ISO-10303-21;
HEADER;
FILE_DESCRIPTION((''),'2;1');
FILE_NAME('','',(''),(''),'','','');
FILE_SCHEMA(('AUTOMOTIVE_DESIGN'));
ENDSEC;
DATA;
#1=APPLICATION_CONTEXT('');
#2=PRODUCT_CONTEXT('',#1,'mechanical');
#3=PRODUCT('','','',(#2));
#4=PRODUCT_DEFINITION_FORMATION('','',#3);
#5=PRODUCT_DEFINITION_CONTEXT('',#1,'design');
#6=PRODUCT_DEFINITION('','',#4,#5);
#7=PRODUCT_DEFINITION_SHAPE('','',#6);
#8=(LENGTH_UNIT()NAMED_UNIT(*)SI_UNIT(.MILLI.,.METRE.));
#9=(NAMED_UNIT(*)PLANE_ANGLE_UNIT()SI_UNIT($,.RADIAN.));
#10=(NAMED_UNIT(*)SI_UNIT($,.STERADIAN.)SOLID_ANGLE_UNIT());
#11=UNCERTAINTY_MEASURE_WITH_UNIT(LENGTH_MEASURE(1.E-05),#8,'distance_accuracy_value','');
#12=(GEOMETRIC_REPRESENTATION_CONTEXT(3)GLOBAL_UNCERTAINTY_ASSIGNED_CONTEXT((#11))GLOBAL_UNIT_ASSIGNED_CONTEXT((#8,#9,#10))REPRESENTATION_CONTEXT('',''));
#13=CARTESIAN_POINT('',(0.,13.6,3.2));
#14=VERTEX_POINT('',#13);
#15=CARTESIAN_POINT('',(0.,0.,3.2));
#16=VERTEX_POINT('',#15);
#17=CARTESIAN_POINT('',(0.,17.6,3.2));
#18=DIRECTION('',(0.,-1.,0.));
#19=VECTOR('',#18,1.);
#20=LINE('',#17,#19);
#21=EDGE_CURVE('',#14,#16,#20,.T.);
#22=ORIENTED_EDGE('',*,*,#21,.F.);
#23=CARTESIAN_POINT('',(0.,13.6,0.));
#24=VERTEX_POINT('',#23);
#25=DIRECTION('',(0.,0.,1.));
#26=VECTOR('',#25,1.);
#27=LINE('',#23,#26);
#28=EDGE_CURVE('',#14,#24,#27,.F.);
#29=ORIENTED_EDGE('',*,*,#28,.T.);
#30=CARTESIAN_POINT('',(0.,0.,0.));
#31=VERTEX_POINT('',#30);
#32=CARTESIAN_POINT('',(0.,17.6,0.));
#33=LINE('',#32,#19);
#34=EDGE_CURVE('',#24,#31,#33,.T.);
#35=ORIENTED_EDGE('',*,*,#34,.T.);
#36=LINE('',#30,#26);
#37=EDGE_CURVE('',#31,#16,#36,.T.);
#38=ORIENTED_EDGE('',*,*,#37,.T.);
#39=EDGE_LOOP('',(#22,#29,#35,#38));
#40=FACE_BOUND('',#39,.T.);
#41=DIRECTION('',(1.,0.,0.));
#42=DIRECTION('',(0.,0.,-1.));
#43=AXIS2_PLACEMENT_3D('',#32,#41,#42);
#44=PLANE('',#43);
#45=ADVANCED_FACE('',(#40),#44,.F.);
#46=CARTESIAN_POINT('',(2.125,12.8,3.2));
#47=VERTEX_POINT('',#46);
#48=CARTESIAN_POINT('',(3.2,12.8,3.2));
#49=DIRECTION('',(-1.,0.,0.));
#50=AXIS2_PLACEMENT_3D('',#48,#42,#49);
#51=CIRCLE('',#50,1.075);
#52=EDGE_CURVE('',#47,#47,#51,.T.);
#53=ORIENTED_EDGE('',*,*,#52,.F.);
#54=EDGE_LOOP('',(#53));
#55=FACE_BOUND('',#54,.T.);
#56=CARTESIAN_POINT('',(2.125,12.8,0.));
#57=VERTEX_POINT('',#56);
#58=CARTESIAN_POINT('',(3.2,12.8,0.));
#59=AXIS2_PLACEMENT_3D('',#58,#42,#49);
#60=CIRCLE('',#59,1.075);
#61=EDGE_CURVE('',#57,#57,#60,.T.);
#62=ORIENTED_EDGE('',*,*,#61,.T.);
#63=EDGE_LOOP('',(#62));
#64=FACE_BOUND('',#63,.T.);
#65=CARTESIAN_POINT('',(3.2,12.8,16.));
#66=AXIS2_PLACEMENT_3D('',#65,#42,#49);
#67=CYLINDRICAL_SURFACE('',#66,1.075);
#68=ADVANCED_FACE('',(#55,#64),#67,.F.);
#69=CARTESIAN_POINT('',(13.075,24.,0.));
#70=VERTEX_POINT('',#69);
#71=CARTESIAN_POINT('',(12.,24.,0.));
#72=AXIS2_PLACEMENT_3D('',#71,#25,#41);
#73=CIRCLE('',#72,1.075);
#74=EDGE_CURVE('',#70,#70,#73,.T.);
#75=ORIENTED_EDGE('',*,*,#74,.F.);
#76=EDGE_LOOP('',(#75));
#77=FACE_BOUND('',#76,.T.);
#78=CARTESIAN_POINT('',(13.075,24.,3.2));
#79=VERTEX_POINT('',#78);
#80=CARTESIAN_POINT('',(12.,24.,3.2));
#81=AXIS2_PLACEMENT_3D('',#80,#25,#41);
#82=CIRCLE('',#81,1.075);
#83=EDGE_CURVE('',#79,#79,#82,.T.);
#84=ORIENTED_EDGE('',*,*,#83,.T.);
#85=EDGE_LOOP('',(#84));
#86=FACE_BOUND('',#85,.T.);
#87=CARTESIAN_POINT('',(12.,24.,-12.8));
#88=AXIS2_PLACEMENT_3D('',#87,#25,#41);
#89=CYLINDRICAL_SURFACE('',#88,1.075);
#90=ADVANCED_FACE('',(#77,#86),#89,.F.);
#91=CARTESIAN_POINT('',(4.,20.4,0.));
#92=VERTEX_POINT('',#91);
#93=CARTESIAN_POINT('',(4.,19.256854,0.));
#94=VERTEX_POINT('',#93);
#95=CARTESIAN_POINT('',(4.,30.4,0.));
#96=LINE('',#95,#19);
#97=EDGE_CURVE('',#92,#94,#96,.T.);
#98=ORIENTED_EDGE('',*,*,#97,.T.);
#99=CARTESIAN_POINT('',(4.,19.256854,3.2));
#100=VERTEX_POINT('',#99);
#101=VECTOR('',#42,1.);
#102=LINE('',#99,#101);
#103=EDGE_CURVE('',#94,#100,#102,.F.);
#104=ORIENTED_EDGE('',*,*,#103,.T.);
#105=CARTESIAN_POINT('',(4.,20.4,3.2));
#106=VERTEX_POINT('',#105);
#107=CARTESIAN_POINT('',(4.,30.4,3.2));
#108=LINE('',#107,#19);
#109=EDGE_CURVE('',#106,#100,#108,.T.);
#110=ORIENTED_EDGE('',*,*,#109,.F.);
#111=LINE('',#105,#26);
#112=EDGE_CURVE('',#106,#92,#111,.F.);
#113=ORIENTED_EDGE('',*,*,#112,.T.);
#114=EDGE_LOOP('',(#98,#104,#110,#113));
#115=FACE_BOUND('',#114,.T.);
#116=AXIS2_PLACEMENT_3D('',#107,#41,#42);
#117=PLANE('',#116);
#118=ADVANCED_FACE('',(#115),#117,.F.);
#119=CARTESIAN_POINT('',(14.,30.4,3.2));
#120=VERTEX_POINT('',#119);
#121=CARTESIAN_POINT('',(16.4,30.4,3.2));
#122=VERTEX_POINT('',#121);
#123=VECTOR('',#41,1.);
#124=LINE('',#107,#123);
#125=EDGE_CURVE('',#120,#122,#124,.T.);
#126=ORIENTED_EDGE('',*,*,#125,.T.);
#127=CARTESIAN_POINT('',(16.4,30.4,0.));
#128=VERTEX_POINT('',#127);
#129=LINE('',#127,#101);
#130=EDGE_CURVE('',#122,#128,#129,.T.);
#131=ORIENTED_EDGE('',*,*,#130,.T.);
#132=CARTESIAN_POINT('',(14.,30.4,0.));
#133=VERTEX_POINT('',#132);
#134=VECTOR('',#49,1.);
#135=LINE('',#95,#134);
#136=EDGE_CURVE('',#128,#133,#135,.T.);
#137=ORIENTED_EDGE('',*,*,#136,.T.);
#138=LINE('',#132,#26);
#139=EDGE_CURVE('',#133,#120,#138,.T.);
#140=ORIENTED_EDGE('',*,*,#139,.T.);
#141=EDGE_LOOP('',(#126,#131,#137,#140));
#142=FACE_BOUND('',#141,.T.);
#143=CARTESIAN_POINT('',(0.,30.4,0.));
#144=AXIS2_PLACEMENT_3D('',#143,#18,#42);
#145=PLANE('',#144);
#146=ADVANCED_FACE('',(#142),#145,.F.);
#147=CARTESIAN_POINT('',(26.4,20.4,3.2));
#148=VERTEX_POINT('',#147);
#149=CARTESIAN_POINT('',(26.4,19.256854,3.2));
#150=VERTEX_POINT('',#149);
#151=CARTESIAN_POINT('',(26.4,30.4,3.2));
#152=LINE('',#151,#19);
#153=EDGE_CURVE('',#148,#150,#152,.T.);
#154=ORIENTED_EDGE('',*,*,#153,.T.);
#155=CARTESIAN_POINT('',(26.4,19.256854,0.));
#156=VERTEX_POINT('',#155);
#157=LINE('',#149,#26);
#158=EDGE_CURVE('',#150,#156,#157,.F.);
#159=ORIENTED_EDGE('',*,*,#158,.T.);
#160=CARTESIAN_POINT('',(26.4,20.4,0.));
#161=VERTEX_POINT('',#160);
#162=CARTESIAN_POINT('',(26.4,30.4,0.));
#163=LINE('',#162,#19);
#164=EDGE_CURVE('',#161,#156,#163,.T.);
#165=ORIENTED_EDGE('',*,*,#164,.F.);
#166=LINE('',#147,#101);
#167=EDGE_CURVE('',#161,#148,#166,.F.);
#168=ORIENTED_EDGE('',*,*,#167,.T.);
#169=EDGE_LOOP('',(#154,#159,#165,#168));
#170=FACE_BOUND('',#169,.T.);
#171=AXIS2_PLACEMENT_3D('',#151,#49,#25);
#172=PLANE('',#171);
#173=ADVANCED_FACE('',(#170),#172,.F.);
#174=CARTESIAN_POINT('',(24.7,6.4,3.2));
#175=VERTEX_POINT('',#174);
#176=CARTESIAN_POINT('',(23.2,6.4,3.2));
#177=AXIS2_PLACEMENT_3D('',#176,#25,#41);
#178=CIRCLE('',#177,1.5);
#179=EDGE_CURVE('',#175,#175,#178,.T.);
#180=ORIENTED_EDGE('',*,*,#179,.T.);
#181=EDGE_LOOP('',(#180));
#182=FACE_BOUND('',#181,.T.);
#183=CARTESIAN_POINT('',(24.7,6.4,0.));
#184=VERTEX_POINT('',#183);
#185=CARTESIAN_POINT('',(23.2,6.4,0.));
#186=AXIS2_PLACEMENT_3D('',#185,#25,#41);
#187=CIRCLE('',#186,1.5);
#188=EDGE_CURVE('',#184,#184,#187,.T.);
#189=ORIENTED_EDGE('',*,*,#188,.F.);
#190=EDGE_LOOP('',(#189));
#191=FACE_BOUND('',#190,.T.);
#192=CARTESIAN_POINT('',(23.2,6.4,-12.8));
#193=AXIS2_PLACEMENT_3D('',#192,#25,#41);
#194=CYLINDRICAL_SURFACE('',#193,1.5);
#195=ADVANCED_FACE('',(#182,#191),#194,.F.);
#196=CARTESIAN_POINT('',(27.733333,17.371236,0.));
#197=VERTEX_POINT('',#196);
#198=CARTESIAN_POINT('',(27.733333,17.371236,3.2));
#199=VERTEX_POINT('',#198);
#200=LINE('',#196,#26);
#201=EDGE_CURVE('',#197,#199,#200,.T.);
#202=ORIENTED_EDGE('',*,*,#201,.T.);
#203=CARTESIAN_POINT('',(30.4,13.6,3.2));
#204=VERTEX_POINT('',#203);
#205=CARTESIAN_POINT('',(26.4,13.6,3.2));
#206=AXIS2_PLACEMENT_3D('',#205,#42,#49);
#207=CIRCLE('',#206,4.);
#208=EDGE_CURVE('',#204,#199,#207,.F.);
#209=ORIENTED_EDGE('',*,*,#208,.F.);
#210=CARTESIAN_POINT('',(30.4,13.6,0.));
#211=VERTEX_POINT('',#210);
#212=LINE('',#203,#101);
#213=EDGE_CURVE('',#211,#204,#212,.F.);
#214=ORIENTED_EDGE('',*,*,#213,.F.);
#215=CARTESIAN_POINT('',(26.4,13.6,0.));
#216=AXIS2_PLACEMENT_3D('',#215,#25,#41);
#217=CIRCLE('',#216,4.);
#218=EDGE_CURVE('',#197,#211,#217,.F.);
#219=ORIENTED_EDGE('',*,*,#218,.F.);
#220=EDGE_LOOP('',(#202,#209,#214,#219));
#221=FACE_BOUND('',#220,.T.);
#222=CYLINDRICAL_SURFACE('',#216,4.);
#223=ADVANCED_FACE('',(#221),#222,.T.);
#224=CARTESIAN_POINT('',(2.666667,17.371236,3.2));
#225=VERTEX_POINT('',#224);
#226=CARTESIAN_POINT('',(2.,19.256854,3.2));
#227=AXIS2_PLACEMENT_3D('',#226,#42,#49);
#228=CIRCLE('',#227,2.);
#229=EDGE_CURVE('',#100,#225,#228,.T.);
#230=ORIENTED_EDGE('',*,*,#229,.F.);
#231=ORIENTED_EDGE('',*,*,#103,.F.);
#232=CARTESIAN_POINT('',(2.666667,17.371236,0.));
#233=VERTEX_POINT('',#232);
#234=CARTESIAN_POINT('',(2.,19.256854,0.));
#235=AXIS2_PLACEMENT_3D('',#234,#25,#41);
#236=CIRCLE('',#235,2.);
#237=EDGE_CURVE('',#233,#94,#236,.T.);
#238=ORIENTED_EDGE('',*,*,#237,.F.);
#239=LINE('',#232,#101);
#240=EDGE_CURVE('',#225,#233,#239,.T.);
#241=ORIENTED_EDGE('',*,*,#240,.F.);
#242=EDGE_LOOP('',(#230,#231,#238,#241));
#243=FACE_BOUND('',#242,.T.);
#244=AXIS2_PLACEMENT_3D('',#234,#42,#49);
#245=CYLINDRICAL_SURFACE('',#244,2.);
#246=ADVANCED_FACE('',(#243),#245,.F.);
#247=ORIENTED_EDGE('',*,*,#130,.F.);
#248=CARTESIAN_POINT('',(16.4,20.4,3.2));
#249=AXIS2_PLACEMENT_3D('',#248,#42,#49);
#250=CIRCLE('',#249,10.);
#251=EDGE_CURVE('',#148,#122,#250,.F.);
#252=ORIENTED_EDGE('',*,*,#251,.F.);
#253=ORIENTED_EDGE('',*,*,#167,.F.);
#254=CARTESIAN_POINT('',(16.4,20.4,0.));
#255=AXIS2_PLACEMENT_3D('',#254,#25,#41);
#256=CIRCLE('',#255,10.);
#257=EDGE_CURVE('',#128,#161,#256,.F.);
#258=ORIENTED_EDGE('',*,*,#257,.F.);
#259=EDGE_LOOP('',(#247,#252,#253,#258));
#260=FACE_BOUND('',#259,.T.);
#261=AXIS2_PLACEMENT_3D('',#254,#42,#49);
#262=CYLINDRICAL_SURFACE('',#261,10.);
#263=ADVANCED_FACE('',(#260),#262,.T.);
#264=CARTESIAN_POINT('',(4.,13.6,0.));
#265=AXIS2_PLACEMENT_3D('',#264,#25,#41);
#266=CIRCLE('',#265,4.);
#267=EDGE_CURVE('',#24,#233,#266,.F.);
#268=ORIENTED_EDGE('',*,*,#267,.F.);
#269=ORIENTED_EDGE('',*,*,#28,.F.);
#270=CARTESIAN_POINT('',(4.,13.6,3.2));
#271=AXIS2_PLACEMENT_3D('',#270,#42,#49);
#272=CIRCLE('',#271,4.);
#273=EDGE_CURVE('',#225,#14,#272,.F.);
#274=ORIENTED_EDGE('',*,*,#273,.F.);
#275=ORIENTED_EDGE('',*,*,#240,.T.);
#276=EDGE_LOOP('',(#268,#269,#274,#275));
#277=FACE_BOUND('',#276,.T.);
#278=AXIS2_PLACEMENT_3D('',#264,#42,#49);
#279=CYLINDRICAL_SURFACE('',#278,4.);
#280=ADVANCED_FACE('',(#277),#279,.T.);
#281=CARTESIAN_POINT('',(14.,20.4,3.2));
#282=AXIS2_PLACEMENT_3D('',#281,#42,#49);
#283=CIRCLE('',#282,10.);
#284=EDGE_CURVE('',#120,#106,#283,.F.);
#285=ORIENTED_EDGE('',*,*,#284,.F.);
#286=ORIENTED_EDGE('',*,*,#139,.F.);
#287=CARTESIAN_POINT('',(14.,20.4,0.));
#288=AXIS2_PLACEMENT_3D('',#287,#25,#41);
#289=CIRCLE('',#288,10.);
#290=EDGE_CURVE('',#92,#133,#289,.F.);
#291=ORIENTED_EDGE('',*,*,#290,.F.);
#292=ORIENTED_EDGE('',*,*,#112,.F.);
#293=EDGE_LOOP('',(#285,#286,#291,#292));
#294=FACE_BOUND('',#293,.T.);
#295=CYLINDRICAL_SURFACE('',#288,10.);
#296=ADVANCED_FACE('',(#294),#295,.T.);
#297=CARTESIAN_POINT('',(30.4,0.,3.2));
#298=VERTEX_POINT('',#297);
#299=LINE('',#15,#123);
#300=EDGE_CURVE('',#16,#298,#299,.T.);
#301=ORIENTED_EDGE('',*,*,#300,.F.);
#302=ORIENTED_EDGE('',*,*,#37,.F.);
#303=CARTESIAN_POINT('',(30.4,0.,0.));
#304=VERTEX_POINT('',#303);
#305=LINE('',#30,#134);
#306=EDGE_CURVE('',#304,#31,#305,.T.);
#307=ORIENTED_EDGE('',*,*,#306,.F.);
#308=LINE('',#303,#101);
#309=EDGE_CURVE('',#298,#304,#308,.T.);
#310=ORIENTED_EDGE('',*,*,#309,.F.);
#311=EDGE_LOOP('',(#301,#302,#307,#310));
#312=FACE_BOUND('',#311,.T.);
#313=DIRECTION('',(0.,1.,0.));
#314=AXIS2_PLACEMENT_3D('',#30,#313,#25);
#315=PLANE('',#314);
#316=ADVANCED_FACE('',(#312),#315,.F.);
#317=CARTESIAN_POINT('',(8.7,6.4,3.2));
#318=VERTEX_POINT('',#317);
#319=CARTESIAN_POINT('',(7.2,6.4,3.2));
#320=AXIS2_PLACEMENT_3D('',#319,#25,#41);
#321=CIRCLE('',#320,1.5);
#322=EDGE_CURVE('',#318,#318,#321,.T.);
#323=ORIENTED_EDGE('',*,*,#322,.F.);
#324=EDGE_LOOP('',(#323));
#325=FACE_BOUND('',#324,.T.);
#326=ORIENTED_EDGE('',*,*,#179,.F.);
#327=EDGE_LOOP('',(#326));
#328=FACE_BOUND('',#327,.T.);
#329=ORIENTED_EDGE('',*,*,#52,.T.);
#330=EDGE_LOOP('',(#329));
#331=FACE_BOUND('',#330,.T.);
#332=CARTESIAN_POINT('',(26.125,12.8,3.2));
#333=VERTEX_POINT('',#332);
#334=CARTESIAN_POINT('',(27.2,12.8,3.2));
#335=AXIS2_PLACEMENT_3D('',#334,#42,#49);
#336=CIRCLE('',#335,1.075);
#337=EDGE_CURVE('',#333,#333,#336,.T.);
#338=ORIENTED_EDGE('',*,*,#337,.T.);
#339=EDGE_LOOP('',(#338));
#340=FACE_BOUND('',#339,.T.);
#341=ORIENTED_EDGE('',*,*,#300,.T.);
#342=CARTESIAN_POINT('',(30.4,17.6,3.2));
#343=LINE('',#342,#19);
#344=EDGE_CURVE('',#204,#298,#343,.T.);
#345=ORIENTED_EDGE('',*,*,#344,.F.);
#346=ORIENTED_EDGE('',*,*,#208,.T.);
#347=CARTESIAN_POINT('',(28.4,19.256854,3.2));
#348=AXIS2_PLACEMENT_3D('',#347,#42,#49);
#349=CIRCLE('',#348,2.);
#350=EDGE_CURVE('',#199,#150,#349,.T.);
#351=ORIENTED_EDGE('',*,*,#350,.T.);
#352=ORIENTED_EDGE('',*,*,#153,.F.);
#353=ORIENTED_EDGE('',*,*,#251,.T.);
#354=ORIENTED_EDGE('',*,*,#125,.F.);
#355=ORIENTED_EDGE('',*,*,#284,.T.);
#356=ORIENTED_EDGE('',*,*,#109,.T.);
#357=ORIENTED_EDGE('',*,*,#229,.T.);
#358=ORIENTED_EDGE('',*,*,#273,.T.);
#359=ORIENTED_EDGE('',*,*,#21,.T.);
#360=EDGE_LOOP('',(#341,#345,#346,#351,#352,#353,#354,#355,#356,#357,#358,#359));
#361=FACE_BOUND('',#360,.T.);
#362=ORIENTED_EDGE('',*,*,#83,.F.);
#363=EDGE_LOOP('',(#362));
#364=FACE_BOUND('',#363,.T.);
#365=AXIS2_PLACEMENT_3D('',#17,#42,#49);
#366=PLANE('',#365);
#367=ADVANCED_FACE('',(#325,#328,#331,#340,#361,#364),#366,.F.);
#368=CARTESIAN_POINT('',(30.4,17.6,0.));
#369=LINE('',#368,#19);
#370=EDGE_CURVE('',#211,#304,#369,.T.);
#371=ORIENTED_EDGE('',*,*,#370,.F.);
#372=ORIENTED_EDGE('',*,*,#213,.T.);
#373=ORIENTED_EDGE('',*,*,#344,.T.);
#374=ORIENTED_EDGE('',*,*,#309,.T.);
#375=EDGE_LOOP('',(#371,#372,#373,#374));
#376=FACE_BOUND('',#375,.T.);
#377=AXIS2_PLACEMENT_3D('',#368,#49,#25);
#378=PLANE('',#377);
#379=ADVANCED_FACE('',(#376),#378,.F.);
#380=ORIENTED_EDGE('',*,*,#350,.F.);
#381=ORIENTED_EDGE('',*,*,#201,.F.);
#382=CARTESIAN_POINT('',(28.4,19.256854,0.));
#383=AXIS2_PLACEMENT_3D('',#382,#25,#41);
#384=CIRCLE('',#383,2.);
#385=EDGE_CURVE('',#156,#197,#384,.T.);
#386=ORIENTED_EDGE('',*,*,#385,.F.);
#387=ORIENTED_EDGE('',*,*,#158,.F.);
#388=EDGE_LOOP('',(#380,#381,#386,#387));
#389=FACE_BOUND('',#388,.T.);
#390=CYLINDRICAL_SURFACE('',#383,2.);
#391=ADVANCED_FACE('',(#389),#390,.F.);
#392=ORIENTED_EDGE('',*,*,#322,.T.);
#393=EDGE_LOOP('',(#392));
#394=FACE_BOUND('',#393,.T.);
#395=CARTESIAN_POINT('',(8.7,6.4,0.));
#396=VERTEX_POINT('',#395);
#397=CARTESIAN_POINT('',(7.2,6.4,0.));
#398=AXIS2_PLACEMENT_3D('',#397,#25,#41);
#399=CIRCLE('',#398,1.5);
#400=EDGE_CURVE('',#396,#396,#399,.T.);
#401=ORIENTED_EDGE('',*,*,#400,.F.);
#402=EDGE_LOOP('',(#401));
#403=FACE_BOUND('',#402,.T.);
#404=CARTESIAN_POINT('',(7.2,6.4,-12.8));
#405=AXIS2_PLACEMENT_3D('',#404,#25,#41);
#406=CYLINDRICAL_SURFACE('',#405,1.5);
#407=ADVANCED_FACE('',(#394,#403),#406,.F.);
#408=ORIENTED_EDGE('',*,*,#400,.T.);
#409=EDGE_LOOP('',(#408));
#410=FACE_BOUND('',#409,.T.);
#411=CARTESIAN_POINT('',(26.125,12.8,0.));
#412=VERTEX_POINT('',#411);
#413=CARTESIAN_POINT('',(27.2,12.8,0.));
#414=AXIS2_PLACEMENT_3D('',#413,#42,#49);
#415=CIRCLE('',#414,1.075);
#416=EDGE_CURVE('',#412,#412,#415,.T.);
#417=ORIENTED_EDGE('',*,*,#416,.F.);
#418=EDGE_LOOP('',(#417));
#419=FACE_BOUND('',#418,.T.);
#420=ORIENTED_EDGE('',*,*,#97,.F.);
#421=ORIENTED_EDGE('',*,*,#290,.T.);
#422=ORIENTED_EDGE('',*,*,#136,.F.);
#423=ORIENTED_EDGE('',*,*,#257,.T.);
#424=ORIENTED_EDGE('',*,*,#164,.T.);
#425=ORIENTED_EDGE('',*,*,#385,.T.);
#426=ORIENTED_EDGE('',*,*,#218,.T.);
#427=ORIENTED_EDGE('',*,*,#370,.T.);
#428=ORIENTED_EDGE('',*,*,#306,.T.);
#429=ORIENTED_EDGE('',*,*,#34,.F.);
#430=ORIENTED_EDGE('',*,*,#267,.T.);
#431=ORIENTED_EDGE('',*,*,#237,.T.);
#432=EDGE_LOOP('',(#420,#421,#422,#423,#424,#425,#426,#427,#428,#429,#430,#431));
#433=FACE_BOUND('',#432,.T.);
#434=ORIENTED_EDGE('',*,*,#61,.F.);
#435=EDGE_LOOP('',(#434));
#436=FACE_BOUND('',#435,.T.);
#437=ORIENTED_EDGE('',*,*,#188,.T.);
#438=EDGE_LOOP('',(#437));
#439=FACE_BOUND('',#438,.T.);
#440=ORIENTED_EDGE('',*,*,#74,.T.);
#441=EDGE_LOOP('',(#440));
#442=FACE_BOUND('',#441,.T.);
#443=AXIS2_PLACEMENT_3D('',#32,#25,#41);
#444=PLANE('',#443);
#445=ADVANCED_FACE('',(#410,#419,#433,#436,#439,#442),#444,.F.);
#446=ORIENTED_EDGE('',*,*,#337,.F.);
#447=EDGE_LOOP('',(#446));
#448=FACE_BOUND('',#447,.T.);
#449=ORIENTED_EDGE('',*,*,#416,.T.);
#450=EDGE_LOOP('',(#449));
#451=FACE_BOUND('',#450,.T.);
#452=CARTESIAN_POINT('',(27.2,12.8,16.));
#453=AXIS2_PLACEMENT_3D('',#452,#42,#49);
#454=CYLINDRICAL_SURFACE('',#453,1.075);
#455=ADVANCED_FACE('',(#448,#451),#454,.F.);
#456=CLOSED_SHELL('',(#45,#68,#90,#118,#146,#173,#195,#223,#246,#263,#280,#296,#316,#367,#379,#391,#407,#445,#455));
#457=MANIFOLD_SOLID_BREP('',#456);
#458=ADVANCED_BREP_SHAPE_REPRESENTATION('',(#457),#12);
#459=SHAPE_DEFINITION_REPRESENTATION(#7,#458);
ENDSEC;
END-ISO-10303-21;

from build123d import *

# Parameters (mm, degrees)
SKETCH1_W           = 30.4
SKETCH1_H           = 3.2
BOSS_EXTRUDE1_DEPTH = 17.6
SKETCH2_R           = 1.5
CUT_EXTRUDE1_DEPTH  = 16
SKETCH3_R           = 1.075
CUT_EXTRUDE2_DEPTH  = 16
SKETCH4_W           = 22.4
SKETCH4_H           = 3.2
BOSS_EXTRUDE2_DEPTH = 12.8
SKETCH5_R           = 1.075
CUT_EXTRUDE3_DEPTH  = 16
FILLET1_R           = 10
FILLET2_R           = 4
FILLET3_R           = 2


with BuildPart() as part:
    # Sketch1 → Boss-Extrude1 (new body)
    with BuildSketch(Plane(origin=(0, 0, 0), x_dir=(1, 0, 0), z_dir=(0, 1, 0))):
        with Locations((15.2, -1.6)):
            Rectangle(SKETCH1_W, SKETCH1_H)
    extrude(amount=BOSS_EXTRUDE1_DEPTH)

    # Sketch2 → Cut-Extrude1 (cut)
    with BuildSketch(Plane.XY.offset(3.2)):
        with Locations((23.2, 6.4)):
            Circle(SKETCH2_R)
        with Locations((7.2, 6.4)):
            Circle(SKETCH2_R)
    extrude(amount=-CUT_EXTRUDE1_DEPTH, mode=Mode.SUBTRACT)

    # Sketch3 → Cut-Extrude2 (cut)
    with BuildSketch(Plane(origin=(0, 0, 0), x_dir=(-1, 0, 0), z_dir=(0, 0, -1))):
        with Locations((-27.2, 12.8)):
            Circle(SKETCH3_R)
        with Locations((-3.2, 12.8)):
            Circle(SKETCH3_R)
    extrude(amount=-CUT_EXTRUDE2_DEPTH, mode=Mode.SUBTRACT)

    # Sketch4 → Boss-Extrude2 (add)
    with BuildSketch(Plane(origin=(0, 17.6, 0), x_dir=(1, 0, 0), z_dir=(0, 1, 0))):
        with Locations((15.2, -1.6)):
            Rectangle(SKETCH4_W, SKETCH4_H)
    extrude(amount=BOSS_EXTRUDE2_DEPTH)

    # Sketch5 → Cut-Extrude3 (cut)
    with BuildSketch(Plane.XY.offset(3.2)):
        with Locations((12, 24)):
            Circle(SKETCH5_R)
    extrude(amount=-CUT_EXTRUDE3_DEPTH, mode=Mode.SUBTRACT)

    # Fillet1
    fillet1_edges = [part.edges().sort_by_distance(p)[0] for p in [
        (4, 30.4, 1.6),
        (26.4, 30.4, 1.6),
    ]]
    fillet(fillet1_edges, radius=FILLET1_R)

    # Fillet2
    fillet2_edges = [part.edges().sort_by_distance(p)[0] for p in [
        (30.4, 17.6, 1.6),
        (0, 17.6, 1.6),
    ]]
    fillet(fillet2_edges, radius=FILLET2_R - 0.0001)  # a hair under: the kernel refuses the full size

    # Fillet3
    fillet3_edges = [part.edges().sort_by_distance(p)[0] for p in [
        (4, 17.6, 1.6),
        (26.4, 17.6, 1.6),
    ]]
    fillet(fillet3_edges, radius=FILLET3_R)


solid = part.part
